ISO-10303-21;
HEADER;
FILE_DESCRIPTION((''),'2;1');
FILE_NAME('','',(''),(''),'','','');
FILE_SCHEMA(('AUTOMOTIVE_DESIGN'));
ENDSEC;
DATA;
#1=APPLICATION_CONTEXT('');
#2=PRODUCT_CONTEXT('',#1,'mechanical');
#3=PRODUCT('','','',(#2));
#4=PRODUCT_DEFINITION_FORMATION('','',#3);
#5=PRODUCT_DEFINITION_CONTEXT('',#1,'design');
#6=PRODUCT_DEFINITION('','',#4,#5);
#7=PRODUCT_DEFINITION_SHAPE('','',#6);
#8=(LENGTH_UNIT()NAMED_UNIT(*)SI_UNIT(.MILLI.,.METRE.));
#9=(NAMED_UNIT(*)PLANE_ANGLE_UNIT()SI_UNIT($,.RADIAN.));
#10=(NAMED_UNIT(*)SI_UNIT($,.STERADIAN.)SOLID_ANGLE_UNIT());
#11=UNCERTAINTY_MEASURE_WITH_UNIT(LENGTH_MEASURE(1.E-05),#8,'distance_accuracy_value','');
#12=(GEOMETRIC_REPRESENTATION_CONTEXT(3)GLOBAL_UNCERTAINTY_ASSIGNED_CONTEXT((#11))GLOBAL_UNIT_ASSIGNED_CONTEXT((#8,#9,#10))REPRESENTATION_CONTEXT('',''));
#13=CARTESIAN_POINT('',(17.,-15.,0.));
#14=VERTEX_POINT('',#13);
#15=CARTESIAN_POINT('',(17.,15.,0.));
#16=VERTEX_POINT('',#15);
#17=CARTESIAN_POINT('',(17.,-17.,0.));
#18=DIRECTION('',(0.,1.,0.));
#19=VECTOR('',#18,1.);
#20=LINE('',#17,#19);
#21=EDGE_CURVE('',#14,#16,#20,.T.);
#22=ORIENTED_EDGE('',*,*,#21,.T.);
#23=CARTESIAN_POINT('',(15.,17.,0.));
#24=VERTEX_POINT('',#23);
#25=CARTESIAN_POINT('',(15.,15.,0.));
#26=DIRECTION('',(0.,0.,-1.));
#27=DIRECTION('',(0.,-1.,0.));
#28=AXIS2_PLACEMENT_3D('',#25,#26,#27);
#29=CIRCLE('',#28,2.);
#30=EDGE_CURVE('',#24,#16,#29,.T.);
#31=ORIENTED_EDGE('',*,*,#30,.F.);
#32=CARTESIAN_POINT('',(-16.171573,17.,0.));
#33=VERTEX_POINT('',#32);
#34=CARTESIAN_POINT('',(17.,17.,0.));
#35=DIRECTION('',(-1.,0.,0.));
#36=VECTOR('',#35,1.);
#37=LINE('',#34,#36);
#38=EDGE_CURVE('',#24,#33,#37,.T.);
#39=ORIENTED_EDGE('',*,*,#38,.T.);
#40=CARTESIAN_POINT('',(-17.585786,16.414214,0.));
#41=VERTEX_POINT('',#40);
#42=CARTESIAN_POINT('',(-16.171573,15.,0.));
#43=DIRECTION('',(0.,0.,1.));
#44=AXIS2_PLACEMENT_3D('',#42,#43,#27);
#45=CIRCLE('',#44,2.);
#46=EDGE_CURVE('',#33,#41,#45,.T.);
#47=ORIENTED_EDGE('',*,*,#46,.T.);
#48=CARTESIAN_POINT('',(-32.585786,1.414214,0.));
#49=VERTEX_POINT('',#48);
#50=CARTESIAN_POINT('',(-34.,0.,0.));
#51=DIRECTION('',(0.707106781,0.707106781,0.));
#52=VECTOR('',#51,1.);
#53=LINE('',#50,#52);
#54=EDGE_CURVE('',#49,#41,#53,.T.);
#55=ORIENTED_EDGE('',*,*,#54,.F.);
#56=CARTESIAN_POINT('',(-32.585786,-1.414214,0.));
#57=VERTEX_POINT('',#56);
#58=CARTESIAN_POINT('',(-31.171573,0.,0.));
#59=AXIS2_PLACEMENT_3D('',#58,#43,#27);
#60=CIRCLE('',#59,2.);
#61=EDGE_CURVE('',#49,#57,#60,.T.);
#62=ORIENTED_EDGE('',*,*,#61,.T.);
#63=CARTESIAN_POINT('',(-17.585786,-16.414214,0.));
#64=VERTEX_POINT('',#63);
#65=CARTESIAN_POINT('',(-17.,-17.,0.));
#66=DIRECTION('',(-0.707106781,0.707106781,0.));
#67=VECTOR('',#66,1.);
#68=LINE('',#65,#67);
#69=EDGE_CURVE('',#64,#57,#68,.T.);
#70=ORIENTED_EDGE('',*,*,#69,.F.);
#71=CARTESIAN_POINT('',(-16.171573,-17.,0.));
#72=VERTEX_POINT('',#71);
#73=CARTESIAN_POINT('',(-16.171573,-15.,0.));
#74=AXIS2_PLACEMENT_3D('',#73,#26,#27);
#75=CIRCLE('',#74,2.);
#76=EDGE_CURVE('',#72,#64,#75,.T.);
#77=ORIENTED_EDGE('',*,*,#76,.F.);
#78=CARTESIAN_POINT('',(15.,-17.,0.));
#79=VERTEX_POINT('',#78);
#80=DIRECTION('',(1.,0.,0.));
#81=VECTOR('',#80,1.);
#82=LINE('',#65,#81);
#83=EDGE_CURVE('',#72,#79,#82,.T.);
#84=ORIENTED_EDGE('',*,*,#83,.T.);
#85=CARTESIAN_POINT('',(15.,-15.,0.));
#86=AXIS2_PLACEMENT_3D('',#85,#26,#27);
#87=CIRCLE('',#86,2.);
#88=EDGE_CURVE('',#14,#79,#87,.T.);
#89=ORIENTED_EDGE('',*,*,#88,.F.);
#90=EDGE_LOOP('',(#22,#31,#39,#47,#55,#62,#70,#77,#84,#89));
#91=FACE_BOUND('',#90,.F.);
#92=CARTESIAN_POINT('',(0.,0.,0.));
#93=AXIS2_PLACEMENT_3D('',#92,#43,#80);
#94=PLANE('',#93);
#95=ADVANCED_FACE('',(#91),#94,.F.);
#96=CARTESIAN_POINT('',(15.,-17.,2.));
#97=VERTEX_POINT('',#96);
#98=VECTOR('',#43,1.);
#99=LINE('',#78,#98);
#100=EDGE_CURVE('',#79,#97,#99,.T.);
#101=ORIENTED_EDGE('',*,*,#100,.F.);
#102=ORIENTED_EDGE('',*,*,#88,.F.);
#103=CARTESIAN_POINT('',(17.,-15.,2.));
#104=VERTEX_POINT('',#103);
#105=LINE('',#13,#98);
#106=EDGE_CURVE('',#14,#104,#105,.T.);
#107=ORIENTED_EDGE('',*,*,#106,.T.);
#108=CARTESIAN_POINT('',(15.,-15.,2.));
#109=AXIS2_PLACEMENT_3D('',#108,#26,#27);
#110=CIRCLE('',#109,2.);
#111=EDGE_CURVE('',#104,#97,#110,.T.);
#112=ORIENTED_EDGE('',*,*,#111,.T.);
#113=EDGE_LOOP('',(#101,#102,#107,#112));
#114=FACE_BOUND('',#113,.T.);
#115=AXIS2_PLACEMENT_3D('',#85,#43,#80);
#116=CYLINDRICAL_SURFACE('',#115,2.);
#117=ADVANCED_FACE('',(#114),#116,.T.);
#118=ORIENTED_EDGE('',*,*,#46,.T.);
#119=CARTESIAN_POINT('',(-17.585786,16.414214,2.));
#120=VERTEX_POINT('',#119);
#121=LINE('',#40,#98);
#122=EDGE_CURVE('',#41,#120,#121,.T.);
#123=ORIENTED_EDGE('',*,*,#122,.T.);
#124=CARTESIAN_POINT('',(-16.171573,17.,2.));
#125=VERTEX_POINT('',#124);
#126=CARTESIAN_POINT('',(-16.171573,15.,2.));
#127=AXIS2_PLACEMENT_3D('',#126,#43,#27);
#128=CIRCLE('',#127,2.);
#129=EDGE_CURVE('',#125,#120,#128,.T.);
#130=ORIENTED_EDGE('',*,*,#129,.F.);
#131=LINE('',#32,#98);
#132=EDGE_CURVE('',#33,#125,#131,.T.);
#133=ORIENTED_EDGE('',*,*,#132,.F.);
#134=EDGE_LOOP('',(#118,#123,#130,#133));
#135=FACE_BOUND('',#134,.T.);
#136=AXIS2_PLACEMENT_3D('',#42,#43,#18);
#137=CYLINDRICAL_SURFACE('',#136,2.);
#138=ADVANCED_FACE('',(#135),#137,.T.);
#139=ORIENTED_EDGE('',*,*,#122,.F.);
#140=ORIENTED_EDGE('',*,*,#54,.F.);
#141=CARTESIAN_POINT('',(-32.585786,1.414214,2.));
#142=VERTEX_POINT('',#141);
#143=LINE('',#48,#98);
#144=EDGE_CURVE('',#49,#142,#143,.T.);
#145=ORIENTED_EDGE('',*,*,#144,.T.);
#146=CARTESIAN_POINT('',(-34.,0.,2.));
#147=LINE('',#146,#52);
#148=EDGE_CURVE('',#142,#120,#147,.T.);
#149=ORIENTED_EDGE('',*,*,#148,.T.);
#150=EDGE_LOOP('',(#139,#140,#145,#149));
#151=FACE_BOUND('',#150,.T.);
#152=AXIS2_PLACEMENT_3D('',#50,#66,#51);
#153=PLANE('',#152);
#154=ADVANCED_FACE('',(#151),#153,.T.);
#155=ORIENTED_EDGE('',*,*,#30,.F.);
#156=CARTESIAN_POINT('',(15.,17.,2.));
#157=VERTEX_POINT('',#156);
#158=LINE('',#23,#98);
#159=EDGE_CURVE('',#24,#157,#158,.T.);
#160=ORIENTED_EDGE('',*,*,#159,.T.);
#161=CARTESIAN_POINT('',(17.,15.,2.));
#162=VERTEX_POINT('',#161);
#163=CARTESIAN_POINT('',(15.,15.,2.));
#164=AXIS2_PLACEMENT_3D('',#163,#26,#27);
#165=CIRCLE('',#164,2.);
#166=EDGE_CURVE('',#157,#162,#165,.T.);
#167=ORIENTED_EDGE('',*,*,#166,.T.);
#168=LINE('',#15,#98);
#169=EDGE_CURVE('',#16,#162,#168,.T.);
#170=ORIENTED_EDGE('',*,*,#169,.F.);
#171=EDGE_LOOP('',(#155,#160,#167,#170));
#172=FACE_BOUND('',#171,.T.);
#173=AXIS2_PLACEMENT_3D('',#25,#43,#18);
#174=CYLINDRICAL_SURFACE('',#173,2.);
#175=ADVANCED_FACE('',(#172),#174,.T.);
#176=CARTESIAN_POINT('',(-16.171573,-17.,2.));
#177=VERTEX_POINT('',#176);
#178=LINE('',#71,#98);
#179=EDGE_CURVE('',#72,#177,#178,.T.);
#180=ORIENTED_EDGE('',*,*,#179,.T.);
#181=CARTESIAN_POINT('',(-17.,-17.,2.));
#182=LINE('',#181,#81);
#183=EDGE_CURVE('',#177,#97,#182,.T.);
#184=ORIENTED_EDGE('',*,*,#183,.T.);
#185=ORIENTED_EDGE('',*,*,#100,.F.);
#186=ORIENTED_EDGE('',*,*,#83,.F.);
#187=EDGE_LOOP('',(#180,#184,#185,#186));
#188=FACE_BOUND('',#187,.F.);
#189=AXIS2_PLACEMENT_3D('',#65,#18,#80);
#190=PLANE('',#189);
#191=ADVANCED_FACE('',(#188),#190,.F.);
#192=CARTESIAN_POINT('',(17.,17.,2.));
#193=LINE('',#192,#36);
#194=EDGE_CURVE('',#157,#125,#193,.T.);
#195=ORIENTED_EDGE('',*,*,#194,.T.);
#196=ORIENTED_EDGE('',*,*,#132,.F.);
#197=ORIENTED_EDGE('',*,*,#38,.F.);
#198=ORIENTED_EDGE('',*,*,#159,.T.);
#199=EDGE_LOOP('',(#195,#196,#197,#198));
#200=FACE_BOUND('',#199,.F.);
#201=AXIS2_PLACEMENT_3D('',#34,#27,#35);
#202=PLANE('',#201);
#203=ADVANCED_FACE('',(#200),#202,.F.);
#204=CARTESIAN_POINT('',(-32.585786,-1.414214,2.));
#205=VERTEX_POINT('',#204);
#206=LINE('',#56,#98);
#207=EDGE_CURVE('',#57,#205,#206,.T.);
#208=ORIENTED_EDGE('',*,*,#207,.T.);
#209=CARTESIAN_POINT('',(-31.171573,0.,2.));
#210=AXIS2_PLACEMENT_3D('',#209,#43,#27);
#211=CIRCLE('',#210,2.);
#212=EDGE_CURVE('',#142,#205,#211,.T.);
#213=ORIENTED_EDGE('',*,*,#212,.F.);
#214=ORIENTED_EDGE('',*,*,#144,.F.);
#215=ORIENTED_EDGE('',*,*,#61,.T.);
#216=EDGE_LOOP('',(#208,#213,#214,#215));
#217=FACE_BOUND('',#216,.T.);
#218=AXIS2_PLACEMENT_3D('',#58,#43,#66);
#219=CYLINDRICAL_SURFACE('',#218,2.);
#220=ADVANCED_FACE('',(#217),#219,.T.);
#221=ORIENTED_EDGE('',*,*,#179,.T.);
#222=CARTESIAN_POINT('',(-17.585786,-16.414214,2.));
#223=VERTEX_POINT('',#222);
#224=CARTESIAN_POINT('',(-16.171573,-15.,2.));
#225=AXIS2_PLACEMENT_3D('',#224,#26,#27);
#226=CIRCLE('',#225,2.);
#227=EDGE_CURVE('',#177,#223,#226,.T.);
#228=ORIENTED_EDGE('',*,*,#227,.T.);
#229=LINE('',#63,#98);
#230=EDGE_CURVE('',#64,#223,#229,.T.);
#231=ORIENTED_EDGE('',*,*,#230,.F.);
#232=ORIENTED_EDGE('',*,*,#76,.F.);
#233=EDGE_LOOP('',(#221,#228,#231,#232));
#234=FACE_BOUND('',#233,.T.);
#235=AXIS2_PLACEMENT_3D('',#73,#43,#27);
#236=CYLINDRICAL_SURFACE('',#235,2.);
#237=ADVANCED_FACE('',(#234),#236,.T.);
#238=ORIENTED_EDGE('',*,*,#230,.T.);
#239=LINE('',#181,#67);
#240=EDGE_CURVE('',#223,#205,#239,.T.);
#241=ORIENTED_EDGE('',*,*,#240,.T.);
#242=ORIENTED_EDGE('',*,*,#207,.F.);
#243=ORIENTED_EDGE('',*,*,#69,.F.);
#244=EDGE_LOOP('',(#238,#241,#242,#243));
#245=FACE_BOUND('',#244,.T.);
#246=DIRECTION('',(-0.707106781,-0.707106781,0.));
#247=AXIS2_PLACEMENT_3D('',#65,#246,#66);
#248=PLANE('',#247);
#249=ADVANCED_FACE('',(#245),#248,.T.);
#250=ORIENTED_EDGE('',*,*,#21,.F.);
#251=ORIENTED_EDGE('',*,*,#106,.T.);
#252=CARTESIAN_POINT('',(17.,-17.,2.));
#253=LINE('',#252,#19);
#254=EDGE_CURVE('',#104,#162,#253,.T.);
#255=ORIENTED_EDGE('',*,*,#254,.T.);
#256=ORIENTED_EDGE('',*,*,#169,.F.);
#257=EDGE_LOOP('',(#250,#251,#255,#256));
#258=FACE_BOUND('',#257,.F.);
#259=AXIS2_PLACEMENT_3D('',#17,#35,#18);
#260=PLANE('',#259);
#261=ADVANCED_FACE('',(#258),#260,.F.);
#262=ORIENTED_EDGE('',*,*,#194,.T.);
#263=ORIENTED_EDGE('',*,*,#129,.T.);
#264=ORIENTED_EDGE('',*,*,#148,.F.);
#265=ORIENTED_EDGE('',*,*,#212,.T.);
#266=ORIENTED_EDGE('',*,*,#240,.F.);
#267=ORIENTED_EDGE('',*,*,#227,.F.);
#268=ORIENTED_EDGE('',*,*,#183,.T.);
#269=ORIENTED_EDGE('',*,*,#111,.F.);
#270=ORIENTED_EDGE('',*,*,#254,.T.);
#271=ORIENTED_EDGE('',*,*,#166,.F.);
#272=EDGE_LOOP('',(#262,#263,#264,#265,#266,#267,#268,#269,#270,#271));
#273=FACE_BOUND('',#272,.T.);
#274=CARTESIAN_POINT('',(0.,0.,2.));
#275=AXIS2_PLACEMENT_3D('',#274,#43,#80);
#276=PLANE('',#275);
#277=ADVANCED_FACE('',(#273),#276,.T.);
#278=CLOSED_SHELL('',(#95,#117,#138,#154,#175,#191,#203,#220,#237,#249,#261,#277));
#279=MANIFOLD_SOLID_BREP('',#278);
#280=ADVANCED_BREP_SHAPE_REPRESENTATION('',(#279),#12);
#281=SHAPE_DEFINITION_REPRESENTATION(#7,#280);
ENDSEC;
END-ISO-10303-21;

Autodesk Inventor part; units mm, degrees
ref_plane "YZ Plane" through (0, 0, 0) normal (1, 0, 0) x (0, 1, 0)
ref_plane "XZ Plane" through (0, 0, 0) normal (0, 1, 0) x (-1, 0, 0)
ref_plane "XY Plane" through (0, 0, 0) normal (0, 0, 1) x (1, 0, 0)
sketch "Sketch1" plane through (0, 0, 0) normal (0, 0, 1) x (1, 0, 0)
  line L0 (-17, -17) -> (17, -17)
  line L1 (17, -17) -> (17, 17)
  line L2 (17, 17) -> (-17, 17)
  line L3 (-17, 17) -> (-17, -17)
  line L4 (-17, -17) -> (17, 17) construction
  line L5 (17, -17) -> (-17, 17) construction
  line L6 (-17, -17) -> (-34, 0)
  line L7 (-34, 0) -> (-17, 17)
  point P0 (0, 0)
  point P1 (-17, 0)
  dimension "d154" = 34
  dimension "d155" = 34
  dimension "d180" = 17
extrude "Plate5" add sketch "Sketch1" along normal blind 2
fillet "Corner Round1" radius 2 5 edges at (17, 17, 1) (-17, 17, 1) (-17, -17, 1) (17, -17, 1) (-34, 0, 1)
properties part number "PRS-1666 FDS 1000 CUP 1_D1200" material "Stainless Steel"
